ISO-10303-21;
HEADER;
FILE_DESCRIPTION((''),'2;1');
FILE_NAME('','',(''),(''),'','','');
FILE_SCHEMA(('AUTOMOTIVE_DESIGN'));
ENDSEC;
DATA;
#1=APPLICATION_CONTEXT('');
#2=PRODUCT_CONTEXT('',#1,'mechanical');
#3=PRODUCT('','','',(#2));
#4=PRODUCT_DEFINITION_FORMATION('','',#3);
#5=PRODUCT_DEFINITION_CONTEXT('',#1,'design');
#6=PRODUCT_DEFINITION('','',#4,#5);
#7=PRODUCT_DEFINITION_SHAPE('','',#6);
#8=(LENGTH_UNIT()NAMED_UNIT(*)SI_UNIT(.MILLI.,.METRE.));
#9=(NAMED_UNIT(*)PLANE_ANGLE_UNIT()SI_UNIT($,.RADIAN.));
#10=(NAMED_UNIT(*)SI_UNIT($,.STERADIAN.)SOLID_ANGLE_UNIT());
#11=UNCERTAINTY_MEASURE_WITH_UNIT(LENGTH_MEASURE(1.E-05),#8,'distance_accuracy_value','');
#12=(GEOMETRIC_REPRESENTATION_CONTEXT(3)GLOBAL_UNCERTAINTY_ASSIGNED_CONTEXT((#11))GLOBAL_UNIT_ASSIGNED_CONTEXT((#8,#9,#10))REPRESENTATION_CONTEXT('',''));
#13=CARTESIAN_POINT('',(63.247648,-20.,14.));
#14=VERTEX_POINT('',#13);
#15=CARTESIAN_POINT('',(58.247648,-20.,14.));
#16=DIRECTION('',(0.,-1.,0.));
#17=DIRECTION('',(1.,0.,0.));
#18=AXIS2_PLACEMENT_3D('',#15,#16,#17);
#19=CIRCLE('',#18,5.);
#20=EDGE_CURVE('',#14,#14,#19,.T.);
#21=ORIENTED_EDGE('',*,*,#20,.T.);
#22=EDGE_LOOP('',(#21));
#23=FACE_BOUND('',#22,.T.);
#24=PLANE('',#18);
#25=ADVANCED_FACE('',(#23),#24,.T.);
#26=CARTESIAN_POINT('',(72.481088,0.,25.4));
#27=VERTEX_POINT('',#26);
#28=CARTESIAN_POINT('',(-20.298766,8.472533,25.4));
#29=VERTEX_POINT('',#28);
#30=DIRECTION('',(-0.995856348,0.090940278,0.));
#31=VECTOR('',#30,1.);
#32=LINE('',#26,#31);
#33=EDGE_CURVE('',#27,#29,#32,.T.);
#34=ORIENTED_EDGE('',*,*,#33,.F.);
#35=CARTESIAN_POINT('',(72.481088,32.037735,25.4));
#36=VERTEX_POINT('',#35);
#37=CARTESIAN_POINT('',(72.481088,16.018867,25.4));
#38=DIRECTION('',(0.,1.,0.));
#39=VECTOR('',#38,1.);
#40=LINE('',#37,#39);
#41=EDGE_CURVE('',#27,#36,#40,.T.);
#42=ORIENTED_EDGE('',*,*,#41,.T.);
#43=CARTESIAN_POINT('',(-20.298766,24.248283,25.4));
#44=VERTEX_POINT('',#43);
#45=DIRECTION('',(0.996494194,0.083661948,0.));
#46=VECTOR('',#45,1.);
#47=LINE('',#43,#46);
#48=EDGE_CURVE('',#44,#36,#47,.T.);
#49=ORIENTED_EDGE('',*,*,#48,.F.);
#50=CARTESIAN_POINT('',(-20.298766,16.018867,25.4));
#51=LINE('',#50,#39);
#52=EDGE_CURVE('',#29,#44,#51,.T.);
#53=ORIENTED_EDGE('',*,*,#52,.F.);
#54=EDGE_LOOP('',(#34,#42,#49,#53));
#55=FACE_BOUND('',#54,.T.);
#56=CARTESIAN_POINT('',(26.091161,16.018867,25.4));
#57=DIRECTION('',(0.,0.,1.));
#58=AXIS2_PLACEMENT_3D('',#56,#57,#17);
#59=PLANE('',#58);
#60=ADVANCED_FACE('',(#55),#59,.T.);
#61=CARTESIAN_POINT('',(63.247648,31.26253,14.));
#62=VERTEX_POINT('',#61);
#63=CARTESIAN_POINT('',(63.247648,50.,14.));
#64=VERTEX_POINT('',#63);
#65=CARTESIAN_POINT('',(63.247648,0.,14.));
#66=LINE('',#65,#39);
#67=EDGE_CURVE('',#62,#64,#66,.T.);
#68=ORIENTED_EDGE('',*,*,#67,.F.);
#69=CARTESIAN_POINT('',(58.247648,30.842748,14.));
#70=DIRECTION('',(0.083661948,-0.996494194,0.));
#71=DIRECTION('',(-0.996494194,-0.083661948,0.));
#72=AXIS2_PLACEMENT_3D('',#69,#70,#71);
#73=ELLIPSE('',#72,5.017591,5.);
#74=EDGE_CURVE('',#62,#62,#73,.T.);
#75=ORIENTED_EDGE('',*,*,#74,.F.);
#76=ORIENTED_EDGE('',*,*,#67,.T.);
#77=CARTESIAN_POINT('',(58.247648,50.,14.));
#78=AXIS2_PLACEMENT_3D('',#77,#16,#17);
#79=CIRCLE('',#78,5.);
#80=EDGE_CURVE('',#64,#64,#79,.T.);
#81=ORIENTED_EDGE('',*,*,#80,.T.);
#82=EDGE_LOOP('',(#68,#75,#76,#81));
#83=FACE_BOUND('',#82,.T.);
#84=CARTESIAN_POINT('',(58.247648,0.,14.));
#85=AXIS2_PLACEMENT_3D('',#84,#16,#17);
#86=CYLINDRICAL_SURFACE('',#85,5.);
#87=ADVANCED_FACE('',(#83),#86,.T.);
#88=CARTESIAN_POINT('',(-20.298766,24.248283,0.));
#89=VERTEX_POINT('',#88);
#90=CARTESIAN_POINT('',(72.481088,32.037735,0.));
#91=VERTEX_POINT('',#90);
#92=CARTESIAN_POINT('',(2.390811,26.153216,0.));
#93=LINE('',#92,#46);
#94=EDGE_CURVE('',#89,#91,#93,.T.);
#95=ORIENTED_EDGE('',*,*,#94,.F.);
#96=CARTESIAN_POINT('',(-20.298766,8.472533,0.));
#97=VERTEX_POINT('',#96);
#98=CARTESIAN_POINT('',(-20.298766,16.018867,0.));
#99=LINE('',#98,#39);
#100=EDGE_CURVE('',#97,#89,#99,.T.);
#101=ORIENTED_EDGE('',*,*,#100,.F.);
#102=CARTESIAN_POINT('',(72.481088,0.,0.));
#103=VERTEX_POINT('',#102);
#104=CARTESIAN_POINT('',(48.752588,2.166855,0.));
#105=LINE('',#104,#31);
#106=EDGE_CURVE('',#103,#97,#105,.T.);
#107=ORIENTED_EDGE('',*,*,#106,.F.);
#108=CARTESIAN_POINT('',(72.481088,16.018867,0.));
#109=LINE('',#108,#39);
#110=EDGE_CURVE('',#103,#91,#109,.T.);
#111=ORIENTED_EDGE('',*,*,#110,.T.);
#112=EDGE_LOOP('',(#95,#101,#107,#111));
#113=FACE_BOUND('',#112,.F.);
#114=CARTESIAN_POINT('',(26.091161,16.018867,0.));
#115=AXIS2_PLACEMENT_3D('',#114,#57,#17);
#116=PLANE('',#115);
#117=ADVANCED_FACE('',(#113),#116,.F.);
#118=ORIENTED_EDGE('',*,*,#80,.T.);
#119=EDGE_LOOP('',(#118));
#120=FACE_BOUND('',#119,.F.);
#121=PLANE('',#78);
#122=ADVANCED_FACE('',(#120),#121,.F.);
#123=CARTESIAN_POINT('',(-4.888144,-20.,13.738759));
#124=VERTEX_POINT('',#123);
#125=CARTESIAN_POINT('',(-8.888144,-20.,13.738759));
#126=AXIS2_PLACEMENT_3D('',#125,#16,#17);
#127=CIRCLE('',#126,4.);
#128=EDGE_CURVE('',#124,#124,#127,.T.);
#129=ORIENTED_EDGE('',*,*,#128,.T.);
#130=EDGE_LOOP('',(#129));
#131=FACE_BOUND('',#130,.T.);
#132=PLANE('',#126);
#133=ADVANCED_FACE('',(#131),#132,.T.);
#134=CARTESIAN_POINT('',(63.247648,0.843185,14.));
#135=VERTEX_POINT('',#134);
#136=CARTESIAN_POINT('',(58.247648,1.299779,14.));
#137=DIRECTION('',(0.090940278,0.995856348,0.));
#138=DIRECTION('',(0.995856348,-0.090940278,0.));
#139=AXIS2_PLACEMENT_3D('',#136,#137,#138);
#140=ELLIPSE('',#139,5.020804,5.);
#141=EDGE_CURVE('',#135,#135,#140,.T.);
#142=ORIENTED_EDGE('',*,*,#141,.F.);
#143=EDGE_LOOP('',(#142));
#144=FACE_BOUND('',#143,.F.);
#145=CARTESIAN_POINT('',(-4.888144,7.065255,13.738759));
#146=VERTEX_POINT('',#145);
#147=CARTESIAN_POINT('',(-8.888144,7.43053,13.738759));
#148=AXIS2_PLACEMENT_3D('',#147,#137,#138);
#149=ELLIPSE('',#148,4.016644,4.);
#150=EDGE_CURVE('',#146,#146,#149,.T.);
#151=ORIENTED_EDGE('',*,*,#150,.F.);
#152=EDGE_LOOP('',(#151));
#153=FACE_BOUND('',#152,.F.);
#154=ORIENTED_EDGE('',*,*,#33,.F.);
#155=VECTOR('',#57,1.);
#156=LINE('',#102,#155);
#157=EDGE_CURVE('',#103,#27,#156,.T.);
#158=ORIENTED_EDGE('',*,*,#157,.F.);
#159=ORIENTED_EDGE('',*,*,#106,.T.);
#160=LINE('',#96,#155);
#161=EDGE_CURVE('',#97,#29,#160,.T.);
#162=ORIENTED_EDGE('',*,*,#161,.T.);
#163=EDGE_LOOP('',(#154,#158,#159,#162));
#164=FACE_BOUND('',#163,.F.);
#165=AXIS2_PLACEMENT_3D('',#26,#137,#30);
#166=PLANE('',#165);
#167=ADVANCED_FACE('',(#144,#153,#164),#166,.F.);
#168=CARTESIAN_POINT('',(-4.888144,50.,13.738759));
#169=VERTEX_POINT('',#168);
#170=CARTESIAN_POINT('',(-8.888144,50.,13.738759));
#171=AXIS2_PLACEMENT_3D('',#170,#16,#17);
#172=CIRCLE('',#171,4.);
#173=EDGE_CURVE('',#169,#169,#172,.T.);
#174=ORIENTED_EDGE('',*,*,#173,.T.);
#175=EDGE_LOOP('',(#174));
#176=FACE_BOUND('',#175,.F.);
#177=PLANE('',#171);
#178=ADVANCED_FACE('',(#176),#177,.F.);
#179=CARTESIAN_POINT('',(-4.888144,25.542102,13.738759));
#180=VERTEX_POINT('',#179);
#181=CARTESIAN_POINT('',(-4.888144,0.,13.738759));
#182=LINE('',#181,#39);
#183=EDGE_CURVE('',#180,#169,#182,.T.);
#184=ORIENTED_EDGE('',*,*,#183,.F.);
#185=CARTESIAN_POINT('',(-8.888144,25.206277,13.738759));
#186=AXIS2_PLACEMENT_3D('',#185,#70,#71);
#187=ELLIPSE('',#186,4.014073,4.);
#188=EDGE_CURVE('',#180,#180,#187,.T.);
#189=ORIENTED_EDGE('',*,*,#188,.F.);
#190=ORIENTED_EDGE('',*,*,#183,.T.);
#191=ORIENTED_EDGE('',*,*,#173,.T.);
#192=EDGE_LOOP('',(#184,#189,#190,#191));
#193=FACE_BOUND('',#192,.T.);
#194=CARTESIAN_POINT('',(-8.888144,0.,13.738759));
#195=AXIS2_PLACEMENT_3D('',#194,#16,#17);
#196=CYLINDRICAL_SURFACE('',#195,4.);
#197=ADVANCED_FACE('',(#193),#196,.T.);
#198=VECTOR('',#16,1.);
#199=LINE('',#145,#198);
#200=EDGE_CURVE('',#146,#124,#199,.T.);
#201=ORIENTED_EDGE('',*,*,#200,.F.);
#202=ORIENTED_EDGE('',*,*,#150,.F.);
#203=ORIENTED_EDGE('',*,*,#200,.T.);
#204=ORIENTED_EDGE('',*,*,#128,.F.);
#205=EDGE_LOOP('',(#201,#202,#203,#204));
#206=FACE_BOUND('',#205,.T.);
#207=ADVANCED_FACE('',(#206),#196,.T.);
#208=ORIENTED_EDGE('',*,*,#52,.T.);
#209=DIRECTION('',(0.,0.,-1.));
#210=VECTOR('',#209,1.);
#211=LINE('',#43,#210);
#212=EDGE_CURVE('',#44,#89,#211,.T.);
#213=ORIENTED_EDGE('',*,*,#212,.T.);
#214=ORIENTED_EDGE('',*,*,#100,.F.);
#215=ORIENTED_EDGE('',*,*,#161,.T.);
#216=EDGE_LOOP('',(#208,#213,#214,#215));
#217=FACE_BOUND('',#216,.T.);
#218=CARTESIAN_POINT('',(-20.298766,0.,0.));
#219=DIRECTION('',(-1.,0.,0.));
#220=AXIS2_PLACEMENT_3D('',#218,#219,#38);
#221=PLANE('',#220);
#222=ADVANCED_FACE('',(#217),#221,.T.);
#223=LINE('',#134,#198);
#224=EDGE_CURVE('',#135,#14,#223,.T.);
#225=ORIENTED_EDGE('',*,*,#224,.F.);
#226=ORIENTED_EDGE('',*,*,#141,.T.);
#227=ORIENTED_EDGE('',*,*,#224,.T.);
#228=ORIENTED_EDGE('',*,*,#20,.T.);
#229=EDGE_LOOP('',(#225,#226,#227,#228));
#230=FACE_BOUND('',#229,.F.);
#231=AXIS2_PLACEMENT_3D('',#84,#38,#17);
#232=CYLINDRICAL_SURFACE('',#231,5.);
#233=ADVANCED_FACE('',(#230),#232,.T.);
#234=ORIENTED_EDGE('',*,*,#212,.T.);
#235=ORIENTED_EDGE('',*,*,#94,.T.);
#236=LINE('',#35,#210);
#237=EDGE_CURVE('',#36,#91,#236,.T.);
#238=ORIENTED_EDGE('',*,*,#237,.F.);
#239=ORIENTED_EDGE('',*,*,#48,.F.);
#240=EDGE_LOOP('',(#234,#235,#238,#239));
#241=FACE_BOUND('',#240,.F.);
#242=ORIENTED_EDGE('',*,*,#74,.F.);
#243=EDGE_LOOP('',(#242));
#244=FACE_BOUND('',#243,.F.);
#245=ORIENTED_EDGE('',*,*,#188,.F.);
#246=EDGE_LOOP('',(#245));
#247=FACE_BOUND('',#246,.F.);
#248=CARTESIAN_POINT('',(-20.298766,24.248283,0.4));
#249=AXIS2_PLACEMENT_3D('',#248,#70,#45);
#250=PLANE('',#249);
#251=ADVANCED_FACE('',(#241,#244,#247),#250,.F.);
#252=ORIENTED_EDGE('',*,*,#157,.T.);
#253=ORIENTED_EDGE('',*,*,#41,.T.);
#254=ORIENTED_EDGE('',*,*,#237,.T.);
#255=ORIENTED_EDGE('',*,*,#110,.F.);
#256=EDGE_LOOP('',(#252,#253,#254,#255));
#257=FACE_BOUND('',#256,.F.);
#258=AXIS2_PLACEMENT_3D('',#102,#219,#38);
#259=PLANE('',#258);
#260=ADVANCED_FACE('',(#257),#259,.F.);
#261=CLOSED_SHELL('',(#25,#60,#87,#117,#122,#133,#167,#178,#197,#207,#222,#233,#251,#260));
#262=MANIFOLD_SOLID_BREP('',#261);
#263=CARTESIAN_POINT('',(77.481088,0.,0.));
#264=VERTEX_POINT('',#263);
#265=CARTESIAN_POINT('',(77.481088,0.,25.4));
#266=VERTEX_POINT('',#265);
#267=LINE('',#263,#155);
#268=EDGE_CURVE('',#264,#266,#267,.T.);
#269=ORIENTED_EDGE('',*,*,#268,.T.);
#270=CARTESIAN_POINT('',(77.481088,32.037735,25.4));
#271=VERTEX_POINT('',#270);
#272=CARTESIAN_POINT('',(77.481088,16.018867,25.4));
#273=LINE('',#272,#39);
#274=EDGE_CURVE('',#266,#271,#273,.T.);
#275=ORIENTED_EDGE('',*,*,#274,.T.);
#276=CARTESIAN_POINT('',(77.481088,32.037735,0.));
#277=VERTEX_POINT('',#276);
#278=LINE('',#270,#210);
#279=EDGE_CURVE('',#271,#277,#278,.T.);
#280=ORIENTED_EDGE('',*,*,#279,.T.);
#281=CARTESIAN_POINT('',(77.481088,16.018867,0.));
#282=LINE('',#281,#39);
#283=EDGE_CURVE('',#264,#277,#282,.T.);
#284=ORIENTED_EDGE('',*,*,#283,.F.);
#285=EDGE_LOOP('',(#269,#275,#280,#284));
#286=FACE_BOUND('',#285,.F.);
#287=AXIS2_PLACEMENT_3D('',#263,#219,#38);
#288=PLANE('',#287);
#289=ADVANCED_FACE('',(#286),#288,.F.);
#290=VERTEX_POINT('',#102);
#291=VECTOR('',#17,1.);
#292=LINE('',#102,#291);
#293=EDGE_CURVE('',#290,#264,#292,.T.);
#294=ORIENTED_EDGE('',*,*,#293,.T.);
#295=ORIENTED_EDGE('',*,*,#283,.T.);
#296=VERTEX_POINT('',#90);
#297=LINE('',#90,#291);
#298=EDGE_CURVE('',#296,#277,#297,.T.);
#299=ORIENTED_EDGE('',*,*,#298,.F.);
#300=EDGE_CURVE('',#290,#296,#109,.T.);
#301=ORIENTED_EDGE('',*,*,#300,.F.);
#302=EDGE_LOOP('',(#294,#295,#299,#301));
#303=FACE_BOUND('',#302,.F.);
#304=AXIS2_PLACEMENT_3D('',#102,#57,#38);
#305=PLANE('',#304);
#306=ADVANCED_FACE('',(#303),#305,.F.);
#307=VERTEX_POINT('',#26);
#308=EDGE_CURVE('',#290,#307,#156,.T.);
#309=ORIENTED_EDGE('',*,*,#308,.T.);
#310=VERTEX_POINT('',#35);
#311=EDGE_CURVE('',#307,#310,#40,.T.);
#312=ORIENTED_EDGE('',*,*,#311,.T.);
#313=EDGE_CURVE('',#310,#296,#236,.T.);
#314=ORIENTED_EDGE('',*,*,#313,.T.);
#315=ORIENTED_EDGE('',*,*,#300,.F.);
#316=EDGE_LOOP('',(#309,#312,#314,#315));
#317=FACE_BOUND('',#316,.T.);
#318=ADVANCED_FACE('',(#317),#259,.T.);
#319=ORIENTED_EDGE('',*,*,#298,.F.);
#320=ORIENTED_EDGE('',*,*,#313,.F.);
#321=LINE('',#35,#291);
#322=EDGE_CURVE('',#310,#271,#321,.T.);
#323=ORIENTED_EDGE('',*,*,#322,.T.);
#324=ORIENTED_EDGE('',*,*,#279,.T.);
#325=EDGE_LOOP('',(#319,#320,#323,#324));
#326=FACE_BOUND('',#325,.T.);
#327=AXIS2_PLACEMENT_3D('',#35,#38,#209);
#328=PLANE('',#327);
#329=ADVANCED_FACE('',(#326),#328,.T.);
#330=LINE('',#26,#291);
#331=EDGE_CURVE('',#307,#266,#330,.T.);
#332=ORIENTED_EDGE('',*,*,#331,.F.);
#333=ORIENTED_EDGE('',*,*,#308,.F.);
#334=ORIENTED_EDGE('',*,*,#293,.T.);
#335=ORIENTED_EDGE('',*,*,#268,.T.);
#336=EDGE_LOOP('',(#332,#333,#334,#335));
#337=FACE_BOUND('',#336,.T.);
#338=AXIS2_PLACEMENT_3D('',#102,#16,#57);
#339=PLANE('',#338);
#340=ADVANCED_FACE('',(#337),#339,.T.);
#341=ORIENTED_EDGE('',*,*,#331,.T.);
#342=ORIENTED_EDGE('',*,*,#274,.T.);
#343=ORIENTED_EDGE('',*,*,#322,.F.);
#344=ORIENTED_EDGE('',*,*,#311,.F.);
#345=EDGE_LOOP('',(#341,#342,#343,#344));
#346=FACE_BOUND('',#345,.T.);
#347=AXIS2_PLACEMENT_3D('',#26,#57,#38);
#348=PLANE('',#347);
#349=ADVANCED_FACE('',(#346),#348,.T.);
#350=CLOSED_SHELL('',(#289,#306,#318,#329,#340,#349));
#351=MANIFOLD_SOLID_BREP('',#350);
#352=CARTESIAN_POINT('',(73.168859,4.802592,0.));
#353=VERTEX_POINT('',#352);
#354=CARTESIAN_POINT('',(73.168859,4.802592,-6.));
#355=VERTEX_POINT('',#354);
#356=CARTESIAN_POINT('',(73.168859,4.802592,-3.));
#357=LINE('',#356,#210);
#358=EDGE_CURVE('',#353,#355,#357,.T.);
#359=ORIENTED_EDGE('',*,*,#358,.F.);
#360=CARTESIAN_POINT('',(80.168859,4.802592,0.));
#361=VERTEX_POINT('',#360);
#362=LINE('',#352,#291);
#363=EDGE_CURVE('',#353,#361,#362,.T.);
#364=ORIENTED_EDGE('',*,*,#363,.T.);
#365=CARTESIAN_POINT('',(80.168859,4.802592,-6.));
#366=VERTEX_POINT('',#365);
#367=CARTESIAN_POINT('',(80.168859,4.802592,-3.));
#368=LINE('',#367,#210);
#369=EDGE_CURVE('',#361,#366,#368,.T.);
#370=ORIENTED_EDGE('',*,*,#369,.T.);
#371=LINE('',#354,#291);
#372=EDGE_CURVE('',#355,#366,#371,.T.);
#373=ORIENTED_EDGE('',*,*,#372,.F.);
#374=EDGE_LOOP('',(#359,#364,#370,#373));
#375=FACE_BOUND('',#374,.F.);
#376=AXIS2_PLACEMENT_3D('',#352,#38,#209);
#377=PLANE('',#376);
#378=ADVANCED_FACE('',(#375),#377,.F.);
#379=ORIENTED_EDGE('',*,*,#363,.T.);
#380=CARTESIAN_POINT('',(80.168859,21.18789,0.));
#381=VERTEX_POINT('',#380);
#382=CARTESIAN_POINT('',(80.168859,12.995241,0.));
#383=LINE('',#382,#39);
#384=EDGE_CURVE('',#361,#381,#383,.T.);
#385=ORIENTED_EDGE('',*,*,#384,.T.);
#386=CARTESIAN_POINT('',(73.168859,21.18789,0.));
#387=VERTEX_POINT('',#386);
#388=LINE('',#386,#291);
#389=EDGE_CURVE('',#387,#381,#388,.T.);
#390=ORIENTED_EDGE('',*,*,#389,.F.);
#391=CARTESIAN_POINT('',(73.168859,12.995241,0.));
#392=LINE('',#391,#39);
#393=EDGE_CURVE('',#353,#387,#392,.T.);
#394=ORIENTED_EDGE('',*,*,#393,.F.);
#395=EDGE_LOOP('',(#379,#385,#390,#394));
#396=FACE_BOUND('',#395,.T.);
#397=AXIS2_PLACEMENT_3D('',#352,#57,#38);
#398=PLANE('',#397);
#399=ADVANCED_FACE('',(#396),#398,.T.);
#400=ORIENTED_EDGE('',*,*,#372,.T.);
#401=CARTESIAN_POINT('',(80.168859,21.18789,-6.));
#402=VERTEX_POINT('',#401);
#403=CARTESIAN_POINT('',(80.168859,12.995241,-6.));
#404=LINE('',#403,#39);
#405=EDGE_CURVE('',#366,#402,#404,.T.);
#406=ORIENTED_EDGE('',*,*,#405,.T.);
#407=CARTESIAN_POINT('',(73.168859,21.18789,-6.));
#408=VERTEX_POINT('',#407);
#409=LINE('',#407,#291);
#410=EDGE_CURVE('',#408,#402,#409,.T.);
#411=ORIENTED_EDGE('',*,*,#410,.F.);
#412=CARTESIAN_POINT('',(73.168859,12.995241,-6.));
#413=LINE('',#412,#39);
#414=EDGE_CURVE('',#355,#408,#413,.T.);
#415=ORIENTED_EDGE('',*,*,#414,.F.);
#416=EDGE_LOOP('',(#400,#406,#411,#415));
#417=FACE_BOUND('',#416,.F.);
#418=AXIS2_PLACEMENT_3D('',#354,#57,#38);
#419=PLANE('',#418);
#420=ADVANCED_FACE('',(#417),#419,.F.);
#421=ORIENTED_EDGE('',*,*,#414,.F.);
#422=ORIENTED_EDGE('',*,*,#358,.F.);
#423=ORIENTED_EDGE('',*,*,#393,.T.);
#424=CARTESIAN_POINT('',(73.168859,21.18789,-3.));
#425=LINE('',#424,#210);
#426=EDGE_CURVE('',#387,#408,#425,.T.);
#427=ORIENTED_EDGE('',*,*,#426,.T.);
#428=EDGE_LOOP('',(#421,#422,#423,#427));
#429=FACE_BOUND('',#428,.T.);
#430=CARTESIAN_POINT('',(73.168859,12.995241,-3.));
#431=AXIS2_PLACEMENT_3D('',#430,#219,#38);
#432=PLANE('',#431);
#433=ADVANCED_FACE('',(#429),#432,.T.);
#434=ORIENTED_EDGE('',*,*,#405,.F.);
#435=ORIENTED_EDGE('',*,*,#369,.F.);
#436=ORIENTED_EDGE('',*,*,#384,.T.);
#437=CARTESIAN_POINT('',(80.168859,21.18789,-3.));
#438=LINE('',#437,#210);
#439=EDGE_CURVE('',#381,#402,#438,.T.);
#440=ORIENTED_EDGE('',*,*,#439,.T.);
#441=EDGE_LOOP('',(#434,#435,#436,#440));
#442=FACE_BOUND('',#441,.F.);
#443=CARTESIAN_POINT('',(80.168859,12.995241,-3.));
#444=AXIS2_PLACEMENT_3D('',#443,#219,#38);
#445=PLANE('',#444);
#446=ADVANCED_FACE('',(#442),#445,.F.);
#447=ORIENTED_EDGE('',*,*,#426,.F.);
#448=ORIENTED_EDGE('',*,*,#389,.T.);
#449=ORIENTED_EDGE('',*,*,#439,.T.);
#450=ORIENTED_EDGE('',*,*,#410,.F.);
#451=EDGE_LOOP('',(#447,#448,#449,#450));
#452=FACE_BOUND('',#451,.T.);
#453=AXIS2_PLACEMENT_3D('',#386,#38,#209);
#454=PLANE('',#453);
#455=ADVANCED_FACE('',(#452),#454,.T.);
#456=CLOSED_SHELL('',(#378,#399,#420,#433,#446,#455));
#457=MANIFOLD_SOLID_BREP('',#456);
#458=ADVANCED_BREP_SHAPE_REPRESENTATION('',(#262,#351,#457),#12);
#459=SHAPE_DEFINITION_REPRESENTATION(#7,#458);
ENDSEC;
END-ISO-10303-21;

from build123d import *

# Parameters (mm, degrees)
F0_W           = 92.7798543125
F0_H           = 32.0377349854
F1_DEPTH       = 25.4
F3_DEPTH       = 25
F4_DEPTH       = 25
F6_E4_LEFT_W   = 16.385298688
F6_E4_LEFT_H   = 6
F7_DEPTH       = 7
F8_DEPTH       = 5
F9_R           = 5
F9_R_2         = 4
F10_DEPTH      = 50
F10_DEPTH_BACK = 20


with BuildPart() as f1:
    # F0 (on Top) → F1 (new body)
    with BuildSketch(Plane.XY):
        with Locations((26.091161184, 16.0188674927)):
            Rectangle(F0_W, F0_H)
    extrude(amount=F1_DEPTH)

    # F2 (on face) → F3 (cut)
    with BuildSketch(Plane.XY.offset(25.4)):
        Polygon((-20.2987659723, 24.2482833564), (72.4810883403, 32.0377349854), (-20.2987659723, 32.0377349854), align=None)
        Polygon((-20.2987659723, 0), (72.4810883403, 0), (-20.2987659723, 8.4725329652), align=None)
    extrude(amount=-F3_DEPTH, mode=Mode.SUBTRACT)

    # F4 (cut): faces of the model
    f4_faces = [f1.faces().sort_by_distance(p)[0] for p in [
        (10.6278521319, 29.441251109, 0.4),
        (10.6278521319, 2.8241776551, 0.4),
    ]]
    extrude(f4_faces, amount=-F4_DEPTH, mode=Mode.SUBTRACT)


with BuildPart() as f7:
    # F6_E4_left (on explicit) → F7 (new body)
    with BuildSketch(Plane(origin=(73.1688588858, 4.8025916331, 0), x_dir=(0, 1, 0), z_dir=(-1, 0, 0))):
        with Locations((8.192649344, 3)):
            Rectangle(F6_E4_LEFT_W, F6_E4_LEFT_H)
    extrude(amount=-F7_DEPTH)


with BuildPart() as f8:
    # F8 (new): a face of the model
    f8_faces = [f1.part.faces().sort_by_distance(p)[0] for p in [
        (72.4810883403, 16.0188674927, 12.7),
    ]]
    extrude(f8_faces, amount=F8_DEPTH)


with BuildPart() as f1_1:
    add(f1.part)

    # F9 (on Front) → F10 (join, two sides)
    with BuildSketch(Plane.XZ) as f10_sk:
        with Locations((58.2476481795, 14)):
            Circle(F9_R)
        with Locations((-8.8881440461, 13.738758862)):
            Circle(F9_R_2)
    extrude(amount=-F10_DEPTH)
    extrude(f10_sk.sketch, amount=F10_DEPTH_BACK)


solid = Compound([f7.part, f8.part, f1_1.part])
